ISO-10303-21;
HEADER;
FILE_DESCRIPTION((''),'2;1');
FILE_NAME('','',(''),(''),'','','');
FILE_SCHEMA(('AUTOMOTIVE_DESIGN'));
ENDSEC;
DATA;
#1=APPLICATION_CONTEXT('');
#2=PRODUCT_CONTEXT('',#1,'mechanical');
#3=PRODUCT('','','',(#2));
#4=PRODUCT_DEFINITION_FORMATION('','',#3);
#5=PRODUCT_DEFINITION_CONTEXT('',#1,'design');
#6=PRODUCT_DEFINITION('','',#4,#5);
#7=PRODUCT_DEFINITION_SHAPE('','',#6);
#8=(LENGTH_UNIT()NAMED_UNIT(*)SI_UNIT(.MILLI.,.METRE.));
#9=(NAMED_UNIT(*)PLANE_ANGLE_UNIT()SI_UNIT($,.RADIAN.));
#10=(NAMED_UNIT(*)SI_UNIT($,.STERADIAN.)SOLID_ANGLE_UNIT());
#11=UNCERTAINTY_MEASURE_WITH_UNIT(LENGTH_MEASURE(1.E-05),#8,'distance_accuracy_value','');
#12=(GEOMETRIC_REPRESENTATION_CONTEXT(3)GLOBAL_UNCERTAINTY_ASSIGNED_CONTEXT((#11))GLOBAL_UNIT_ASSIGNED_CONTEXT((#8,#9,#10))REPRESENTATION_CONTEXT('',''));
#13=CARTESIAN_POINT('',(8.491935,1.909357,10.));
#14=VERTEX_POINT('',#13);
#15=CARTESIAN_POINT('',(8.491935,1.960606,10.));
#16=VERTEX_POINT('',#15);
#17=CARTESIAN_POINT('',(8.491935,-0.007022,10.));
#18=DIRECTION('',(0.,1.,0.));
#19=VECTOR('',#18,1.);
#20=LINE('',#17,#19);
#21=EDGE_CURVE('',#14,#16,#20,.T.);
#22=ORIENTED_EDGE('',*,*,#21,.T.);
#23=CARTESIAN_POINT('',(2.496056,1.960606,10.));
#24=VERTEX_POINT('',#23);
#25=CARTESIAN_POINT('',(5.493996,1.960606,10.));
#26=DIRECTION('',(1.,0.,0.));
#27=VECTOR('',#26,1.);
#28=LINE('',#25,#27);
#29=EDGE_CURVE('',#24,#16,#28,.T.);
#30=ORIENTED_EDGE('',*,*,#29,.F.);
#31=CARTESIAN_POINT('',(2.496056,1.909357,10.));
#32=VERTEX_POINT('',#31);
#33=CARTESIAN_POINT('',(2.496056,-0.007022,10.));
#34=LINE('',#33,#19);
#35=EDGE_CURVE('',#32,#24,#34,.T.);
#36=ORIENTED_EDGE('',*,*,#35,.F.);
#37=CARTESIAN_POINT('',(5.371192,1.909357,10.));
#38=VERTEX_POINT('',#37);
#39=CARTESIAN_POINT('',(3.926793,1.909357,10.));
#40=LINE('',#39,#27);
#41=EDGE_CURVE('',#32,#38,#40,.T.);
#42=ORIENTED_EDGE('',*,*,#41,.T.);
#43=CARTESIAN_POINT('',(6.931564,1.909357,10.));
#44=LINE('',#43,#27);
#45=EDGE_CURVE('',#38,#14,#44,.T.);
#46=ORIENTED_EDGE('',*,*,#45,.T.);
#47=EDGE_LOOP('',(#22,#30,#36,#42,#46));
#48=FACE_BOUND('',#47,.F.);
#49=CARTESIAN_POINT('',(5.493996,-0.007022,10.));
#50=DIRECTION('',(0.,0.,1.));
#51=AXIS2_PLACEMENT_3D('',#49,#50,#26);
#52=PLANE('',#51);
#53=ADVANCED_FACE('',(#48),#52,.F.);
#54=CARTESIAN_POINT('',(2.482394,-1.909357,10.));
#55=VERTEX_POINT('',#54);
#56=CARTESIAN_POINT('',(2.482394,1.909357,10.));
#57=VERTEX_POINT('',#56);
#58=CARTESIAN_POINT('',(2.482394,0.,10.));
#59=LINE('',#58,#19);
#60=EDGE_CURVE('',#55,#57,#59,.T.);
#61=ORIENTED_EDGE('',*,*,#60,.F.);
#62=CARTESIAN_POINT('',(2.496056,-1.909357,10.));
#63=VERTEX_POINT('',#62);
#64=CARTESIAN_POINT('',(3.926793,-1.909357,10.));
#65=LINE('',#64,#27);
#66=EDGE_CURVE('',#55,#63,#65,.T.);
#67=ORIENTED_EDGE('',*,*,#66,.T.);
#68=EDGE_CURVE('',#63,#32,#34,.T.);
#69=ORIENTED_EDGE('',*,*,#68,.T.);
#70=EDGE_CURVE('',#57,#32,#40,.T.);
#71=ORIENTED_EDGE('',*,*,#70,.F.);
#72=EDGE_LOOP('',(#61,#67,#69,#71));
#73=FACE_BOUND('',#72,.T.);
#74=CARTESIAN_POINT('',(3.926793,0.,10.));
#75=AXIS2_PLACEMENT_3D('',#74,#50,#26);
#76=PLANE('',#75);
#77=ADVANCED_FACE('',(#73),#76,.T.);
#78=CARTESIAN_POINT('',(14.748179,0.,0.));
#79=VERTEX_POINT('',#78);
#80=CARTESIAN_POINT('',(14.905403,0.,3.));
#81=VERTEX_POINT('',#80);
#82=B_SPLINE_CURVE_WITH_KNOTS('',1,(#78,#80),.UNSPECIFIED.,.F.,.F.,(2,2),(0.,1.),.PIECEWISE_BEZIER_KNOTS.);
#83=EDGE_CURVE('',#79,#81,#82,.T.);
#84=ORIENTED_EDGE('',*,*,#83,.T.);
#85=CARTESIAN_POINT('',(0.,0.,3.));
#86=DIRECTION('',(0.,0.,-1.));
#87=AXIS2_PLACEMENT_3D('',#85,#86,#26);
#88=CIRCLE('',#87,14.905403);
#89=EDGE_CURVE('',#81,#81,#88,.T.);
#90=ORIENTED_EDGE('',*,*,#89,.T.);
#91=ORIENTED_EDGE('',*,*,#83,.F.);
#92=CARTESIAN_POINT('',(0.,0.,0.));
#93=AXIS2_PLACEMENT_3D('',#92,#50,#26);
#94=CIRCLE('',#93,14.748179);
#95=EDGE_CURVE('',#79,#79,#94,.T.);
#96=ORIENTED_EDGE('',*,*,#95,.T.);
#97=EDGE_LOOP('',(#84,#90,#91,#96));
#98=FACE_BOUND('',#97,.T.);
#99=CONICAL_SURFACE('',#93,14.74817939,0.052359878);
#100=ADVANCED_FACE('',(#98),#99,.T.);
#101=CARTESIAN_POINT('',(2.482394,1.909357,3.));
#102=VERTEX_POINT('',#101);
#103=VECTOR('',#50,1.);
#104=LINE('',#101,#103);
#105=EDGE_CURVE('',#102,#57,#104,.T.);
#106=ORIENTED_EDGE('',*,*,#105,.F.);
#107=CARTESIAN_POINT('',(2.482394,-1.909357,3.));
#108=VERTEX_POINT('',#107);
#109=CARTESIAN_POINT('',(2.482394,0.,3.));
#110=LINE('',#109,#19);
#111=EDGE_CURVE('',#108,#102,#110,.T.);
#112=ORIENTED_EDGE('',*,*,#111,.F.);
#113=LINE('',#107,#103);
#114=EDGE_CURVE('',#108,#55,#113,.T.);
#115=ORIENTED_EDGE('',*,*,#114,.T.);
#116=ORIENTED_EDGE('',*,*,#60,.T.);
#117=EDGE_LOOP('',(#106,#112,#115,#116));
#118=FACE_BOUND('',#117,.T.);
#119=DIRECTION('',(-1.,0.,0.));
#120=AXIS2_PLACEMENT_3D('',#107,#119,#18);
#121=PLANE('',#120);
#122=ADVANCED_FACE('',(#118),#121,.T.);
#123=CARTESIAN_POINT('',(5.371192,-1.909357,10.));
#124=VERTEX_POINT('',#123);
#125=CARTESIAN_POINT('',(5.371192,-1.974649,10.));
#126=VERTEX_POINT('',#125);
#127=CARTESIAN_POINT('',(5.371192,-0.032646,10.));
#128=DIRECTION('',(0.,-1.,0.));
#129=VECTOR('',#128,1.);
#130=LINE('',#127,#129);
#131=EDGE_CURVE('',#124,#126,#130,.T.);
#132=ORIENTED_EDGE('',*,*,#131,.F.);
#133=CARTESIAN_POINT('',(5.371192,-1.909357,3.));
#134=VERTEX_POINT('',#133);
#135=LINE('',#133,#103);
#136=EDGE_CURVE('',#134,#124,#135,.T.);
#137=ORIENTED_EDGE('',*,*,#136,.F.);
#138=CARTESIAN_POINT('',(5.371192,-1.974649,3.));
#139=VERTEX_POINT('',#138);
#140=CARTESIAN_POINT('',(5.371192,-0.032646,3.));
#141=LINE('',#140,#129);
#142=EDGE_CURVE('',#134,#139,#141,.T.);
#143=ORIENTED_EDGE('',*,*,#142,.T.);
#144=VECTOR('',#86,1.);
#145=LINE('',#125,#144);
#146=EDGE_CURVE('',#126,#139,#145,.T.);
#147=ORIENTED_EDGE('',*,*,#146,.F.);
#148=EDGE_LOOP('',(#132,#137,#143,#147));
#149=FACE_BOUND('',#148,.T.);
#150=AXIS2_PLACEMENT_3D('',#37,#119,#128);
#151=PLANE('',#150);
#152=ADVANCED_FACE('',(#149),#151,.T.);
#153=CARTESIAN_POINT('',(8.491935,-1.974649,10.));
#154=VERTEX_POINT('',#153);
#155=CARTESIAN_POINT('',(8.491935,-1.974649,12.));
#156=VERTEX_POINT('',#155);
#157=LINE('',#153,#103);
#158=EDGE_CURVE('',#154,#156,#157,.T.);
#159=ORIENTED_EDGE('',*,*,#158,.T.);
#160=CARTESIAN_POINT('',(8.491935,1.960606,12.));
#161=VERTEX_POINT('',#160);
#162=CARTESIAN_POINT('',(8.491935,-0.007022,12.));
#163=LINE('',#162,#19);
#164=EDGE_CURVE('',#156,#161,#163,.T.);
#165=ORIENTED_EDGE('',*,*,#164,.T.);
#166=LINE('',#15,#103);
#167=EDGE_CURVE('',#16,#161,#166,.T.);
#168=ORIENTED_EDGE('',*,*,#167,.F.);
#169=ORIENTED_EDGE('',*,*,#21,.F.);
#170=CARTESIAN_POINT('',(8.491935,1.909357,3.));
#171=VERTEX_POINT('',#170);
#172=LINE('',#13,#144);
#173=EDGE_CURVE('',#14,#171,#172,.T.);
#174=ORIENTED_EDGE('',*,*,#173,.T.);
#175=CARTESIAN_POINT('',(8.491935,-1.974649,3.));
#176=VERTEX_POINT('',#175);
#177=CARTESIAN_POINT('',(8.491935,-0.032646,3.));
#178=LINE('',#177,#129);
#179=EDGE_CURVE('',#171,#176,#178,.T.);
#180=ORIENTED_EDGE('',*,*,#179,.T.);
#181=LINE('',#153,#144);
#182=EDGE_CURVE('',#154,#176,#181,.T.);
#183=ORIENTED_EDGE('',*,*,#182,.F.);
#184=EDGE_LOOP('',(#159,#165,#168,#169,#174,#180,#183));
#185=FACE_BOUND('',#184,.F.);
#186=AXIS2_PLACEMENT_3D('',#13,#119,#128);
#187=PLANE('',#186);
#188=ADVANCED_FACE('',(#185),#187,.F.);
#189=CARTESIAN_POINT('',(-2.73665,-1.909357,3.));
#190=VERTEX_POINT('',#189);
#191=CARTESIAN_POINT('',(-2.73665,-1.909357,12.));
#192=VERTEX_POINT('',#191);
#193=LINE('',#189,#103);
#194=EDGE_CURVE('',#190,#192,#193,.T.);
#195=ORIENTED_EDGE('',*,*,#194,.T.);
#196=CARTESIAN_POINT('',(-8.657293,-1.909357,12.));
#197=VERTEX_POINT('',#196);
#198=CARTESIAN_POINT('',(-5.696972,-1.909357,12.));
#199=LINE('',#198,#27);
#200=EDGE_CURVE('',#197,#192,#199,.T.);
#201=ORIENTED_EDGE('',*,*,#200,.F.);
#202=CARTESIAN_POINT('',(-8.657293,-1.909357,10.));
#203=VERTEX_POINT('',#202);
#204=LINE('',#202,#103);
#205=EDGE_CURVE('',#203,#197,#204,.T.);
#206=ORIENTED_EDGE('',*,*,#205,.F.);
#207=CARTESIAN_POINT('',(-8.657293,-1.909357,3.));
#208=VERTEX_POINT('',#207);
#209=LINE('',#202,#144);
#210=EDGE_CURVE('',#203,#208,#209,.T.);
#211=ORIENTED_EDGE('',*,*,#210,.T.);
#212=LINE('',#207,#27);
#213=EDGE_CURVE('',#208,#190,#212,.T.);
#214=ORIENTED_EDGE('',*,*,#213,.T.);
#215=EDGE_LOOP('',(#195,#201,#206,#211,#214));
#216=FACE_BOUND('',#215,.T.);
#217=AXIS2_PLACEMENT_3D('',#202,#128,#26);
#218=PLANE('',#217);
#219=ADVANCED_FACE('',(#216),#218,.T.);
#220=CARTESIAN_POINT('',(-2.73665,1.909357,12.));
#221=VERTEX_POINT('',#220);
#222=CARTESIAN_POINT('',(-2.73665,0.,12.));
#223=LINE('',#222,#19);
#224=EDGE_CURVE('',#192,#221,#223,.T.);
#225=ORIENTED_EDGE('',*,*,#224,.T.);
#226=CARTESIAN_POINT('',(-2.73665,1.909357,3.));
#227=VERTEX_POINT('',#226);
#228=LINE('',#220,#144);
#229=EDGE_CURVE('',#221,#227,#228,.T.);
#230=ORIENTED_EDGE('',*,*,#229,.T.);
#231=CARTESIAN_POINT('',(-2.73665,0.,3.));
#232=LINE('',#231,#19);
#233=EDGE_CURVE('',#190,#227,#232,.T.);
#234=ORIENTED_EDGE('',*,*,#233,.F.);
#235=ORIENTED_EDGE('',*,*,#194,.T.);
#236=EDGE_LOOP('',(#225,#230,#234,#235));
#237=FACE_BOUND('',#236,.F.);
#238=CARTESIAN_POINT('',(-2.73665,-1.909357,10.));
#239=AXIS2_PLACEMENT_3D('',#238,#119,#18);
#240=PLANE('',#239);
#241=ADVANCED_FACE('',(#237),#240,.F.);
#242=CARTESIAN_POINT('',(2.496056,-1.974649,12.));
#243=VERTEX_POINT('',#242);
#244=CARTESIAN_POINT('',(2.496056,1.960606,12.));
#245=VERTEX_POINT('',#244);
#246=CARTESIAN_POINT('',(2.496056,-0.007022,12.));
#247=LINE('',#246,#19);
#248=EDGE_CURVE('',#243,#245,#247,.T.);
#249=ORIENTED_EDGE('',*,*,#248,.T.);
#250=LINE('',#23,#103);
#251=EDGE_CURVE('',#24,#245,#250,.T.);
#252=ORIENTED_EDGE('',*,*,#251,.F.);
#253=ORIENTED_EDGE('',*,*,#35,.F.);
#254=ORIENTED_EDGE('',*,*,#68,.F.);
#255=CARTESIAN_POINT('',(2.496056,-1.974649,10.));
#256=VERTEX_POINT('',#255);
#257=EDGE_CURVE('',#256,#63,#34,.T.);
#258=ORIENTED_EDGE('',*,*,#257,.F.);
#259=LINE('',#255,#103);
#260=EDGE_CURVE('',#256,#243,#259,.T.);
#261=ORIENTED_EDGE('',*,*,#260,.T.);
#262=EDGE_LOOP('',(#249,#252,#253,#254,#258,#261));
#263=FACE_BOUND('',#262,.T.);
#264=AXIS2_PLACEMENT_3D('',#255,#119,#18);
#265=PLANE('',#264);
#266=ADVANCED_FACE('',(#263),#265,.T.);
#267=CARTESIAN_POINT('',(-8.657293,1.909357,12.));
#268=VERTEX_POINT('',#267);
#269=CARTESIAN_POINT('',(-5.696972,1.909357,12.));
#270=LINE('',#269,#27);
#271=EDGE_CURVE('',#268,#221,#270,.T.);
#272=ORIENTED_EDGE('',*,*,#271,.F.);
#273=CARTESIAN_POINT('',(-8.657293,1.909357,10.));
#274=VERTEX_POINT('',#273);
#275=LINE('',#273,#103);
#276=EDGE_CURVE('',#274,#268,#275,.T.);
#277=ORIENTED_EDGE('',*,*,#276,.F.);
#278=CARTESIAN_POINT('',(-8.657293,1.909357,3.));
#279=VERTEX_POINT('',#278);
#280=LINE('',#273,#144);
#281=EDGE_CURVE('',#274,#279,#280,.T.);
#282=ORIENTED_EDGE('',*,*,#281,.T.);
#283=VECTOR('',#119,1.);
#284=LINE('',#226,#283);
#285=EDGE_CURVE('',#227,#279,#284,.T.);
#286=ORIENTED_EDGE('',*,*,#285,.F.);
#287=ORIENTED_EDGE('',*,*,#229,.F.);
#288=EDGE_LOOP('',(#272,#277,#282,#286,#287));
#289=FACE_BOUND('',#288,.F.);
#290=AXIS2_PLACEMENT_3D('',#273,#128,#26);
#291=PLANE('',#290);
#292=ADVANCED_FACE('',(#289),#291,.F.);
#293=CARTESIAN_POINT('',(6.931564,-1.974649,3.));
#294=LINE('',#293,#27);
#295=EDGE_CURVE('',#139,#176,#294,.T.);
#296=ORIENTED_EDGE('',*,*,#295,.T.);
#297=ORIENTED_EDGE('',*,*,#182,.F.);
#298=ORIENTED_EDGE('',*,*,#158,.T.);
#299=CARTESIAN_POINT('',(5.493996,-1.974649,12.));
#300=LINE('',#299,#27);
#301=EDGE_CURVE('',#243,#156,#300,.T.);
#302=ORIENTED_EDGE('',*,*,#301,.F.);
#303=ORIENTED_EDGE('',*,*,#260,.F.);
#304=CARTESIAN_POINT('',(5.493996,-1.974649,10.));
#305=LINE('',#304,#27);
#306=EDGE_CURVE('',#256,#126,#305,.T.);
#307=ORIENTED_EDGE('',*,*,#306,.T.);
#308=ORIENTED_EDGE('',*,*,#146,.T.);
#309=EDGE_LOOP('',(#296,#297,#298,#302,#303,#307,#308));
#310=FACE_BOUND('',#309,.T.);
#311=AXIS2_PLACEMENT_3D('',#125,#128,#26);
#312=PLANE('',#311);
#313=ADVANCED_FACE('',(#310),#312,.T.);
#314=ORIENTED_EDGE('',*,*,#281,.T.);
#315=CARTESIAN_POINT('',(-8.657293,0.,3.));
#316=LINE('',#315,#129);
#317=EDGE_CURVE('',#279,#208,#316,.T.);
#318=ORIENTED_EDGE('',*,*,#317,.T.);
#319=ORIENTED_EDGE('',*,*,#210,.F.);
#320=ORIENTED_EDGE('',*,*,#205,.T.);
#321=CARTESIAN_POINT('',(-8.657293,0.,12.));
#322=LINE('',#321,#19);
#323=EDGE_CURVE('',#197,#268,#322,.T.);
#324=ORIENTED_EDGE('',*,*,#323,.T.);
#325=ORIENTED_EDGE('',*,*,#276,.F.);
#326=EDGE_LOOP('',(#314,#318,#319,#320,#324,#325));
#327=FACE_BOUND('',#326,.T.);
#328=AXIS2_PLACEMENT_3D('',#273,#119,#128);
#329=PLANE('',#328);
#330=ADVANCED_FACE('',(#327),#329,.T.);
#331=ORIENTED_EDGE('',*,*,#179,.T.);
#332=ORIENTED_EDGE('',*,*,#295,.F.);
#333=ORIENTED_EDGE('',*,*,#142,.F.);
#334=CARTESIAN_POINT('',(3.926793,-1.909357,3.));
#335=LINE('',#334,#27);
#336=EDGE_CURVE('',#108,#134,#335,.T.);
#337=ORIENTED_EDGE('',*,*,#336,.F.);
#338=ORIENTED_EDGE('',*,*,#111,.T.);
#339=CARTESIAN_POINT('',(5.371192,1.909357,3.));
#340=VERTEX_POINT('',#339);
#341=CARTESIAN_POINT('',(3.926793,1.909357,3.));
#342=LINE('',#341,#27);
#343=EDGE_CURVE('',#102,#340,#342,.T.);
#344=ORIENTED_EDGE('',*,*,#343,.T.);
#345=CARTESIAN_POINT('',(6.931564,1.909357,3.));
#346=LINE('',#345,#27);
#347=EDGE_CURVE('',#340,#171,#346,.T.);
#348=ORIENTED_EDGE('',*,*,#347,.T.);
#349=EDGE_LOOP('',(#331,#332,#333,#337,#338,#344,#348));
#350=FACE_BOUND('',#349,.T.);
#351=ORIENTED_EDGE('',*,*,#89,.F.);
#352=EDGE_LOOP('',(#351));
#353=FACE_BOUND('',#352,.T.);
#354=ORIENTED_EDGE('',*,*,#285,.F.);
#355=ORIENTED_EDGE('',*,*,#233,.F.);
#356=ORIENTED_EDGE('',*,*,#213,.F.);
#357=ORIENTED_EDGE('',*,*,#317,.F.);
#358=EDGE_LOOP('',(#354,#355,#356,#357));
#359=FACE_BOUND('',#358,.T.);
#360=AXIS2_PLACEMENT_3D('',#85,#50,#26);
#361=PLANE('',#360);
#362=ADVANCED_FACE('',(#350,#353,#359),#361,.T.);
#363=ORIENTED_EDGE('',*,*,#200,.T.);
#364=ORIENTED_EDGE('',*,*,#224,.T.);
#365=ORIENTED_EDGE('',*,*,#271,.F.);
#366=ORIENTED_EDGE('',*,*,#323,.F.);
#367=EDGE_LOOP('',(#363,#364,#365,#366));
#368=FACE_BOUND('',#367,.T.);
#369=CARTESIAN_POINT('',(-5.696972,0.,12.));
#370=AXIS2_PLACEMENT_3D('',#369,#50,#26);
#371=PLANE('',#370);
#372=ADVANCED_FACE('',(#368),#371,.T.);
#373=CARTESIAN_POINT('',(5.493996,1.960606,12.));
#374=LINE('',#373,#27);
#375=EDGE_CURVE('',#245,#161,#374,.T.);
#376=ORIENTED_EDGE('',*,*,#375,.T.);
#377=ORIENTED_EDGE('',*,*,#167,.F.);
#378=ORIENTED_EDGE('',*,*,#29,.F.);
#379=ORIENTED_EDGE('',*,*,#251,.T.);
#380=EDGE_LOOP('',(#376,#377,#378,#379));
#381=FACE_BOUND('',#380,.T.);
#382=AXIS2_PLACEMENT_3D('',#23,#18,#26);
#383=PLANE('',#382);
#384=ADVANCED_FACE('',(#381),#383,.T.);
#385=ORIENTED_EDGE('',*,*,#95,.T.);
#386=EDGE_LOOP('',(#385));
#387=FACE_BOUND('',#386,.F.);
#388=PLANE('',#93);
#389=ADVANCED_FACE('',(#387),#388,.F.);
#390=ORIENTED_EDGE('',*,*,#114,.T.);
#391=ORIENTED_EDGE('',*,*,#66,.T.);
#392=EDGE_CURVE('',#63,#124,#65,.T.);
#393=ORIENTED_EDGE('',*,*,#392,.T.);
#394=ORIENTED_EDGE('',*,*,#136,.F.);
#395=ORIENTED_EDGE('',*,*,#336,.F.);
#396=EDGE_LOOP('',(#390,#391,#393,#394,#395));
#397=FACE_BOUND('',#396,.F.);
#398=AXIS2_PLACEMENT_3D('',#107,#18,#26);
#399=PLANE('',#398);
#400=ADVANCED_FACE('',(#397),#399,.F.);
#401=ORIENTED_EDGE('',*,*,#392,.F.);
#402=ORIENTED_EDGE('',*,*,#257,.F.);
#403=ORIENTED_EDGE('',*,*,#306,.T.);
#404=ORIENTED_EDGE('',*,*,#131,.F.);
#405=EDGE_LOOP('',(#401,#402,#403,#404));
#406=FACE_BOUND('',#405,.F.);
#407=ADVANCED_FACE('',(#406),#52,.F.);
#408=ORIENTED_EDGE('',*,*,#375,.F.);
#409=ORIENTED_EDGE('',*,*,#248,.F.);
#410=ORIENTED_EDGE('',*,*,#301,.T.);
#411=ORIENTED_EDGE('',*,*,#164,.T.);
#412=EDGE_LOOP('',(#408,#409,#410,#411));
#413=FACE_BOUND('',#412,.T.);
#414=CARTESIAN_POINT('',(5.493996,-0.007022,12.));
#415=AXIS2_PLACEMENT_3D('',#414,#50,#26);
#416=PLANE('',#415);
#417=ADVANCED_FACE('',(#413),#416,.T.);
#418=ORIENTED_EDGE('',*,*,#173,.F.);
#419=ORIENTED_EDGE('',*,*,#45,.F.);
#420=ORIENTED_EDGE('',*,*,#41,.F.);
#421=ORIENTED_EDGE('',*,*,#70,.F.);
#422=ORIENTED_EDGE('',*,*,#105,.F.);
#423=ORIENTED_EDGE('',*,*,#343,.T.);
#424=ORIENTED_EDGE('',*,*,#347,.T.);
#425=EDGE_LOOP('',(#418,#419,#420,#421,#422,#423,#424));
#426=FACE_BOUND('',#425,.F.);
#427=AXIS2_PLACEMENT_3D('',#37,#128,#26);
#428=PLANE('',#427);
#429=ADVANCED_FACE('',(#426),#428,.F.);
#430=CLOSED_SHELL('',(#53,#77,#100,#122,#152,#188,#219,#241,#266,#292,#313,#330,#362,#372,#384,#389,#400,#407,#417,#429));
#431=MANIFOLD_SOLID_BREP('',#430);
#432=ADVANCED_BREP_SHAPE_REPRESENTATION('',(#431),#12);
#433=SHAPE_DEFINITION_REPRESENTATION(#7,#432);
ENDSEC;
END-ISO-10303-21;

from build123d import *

# Parameters (mm, degrees)
F0_R     = 14.7481793899
F1_DEPTH = 3
F1_TAPER = -3
F2_W     = 2.8173960745
F2_H     = 3.8187131286
F2_W_2   = 2.8887987137
F3_DEPTH = 7
F4_W     = 5.9206429869
F4_H     = 3.8187131286
F4_W_2   = 5.9958791826
F4_H_2   = 3.9352546446
F5_DEPTH = 2
F6_W     = 3.1207427382
F6_H     = 3.8840055931
F7_DEPTH = 7
F8_W     = 3.1032469124
F8_H     = 3.8187131286
F9_DEPTH = 7


with BuildPart() as f1:
    # F0 (on Top) → F1 (new body)
    with BuildSketch(Plane.XY):
        Circle(F0_R)
    extrude(amount=F1_DEPTH, taper=F1_TAPER)

    # F2 (on face) → F3 (join)
    with BuildSketch(Plane.XY.offset(3)):
        with Locations((-4.1453484446, 0)):
            Rectangle(F2_W, F2_H)
        with Locations((3.9267931134, 0)):
            Rectangle(F2_W_2, F2_H)
    extrude(amount=F3_DEPTH)

    # F4 (on face) → F5 (join)
    with BuildSketch(Plane.XY.offset(10)):
        with Locations((-5.6969719008, 0)):
            Rectangle(F4_W, F4_H)
        with Locations((5.4939956171, -0.0070217066)):
            Rectangle(F4_W_2, F4_H_2)
    extrude(amount=F5_DEPTH)

    # F6 (on face) → F7 (join)
    with BuildSketch(Plane(origin=(0, 0, 10), x_dir=(1, 0, 0), z_dir=(0, 0, -1))):
        with Locations((6.9315638393, 0.0326462323)):
            Rectangle(F6_W, F6_H)
    extrude(amount=F7_DEPTH)

    # F8 (on face) → F9 (join)
    with BuildSketch(Plane(origin=(0, 0, 10), x_dir=(1, 0, 0), z_dir=(0, 0, -1))):
        with Locations((-7.105669938, 0)):
            Rectangle(F8_W, F8_H)
    extrude(amount=F9_DEPTH)


solid = f1.part
